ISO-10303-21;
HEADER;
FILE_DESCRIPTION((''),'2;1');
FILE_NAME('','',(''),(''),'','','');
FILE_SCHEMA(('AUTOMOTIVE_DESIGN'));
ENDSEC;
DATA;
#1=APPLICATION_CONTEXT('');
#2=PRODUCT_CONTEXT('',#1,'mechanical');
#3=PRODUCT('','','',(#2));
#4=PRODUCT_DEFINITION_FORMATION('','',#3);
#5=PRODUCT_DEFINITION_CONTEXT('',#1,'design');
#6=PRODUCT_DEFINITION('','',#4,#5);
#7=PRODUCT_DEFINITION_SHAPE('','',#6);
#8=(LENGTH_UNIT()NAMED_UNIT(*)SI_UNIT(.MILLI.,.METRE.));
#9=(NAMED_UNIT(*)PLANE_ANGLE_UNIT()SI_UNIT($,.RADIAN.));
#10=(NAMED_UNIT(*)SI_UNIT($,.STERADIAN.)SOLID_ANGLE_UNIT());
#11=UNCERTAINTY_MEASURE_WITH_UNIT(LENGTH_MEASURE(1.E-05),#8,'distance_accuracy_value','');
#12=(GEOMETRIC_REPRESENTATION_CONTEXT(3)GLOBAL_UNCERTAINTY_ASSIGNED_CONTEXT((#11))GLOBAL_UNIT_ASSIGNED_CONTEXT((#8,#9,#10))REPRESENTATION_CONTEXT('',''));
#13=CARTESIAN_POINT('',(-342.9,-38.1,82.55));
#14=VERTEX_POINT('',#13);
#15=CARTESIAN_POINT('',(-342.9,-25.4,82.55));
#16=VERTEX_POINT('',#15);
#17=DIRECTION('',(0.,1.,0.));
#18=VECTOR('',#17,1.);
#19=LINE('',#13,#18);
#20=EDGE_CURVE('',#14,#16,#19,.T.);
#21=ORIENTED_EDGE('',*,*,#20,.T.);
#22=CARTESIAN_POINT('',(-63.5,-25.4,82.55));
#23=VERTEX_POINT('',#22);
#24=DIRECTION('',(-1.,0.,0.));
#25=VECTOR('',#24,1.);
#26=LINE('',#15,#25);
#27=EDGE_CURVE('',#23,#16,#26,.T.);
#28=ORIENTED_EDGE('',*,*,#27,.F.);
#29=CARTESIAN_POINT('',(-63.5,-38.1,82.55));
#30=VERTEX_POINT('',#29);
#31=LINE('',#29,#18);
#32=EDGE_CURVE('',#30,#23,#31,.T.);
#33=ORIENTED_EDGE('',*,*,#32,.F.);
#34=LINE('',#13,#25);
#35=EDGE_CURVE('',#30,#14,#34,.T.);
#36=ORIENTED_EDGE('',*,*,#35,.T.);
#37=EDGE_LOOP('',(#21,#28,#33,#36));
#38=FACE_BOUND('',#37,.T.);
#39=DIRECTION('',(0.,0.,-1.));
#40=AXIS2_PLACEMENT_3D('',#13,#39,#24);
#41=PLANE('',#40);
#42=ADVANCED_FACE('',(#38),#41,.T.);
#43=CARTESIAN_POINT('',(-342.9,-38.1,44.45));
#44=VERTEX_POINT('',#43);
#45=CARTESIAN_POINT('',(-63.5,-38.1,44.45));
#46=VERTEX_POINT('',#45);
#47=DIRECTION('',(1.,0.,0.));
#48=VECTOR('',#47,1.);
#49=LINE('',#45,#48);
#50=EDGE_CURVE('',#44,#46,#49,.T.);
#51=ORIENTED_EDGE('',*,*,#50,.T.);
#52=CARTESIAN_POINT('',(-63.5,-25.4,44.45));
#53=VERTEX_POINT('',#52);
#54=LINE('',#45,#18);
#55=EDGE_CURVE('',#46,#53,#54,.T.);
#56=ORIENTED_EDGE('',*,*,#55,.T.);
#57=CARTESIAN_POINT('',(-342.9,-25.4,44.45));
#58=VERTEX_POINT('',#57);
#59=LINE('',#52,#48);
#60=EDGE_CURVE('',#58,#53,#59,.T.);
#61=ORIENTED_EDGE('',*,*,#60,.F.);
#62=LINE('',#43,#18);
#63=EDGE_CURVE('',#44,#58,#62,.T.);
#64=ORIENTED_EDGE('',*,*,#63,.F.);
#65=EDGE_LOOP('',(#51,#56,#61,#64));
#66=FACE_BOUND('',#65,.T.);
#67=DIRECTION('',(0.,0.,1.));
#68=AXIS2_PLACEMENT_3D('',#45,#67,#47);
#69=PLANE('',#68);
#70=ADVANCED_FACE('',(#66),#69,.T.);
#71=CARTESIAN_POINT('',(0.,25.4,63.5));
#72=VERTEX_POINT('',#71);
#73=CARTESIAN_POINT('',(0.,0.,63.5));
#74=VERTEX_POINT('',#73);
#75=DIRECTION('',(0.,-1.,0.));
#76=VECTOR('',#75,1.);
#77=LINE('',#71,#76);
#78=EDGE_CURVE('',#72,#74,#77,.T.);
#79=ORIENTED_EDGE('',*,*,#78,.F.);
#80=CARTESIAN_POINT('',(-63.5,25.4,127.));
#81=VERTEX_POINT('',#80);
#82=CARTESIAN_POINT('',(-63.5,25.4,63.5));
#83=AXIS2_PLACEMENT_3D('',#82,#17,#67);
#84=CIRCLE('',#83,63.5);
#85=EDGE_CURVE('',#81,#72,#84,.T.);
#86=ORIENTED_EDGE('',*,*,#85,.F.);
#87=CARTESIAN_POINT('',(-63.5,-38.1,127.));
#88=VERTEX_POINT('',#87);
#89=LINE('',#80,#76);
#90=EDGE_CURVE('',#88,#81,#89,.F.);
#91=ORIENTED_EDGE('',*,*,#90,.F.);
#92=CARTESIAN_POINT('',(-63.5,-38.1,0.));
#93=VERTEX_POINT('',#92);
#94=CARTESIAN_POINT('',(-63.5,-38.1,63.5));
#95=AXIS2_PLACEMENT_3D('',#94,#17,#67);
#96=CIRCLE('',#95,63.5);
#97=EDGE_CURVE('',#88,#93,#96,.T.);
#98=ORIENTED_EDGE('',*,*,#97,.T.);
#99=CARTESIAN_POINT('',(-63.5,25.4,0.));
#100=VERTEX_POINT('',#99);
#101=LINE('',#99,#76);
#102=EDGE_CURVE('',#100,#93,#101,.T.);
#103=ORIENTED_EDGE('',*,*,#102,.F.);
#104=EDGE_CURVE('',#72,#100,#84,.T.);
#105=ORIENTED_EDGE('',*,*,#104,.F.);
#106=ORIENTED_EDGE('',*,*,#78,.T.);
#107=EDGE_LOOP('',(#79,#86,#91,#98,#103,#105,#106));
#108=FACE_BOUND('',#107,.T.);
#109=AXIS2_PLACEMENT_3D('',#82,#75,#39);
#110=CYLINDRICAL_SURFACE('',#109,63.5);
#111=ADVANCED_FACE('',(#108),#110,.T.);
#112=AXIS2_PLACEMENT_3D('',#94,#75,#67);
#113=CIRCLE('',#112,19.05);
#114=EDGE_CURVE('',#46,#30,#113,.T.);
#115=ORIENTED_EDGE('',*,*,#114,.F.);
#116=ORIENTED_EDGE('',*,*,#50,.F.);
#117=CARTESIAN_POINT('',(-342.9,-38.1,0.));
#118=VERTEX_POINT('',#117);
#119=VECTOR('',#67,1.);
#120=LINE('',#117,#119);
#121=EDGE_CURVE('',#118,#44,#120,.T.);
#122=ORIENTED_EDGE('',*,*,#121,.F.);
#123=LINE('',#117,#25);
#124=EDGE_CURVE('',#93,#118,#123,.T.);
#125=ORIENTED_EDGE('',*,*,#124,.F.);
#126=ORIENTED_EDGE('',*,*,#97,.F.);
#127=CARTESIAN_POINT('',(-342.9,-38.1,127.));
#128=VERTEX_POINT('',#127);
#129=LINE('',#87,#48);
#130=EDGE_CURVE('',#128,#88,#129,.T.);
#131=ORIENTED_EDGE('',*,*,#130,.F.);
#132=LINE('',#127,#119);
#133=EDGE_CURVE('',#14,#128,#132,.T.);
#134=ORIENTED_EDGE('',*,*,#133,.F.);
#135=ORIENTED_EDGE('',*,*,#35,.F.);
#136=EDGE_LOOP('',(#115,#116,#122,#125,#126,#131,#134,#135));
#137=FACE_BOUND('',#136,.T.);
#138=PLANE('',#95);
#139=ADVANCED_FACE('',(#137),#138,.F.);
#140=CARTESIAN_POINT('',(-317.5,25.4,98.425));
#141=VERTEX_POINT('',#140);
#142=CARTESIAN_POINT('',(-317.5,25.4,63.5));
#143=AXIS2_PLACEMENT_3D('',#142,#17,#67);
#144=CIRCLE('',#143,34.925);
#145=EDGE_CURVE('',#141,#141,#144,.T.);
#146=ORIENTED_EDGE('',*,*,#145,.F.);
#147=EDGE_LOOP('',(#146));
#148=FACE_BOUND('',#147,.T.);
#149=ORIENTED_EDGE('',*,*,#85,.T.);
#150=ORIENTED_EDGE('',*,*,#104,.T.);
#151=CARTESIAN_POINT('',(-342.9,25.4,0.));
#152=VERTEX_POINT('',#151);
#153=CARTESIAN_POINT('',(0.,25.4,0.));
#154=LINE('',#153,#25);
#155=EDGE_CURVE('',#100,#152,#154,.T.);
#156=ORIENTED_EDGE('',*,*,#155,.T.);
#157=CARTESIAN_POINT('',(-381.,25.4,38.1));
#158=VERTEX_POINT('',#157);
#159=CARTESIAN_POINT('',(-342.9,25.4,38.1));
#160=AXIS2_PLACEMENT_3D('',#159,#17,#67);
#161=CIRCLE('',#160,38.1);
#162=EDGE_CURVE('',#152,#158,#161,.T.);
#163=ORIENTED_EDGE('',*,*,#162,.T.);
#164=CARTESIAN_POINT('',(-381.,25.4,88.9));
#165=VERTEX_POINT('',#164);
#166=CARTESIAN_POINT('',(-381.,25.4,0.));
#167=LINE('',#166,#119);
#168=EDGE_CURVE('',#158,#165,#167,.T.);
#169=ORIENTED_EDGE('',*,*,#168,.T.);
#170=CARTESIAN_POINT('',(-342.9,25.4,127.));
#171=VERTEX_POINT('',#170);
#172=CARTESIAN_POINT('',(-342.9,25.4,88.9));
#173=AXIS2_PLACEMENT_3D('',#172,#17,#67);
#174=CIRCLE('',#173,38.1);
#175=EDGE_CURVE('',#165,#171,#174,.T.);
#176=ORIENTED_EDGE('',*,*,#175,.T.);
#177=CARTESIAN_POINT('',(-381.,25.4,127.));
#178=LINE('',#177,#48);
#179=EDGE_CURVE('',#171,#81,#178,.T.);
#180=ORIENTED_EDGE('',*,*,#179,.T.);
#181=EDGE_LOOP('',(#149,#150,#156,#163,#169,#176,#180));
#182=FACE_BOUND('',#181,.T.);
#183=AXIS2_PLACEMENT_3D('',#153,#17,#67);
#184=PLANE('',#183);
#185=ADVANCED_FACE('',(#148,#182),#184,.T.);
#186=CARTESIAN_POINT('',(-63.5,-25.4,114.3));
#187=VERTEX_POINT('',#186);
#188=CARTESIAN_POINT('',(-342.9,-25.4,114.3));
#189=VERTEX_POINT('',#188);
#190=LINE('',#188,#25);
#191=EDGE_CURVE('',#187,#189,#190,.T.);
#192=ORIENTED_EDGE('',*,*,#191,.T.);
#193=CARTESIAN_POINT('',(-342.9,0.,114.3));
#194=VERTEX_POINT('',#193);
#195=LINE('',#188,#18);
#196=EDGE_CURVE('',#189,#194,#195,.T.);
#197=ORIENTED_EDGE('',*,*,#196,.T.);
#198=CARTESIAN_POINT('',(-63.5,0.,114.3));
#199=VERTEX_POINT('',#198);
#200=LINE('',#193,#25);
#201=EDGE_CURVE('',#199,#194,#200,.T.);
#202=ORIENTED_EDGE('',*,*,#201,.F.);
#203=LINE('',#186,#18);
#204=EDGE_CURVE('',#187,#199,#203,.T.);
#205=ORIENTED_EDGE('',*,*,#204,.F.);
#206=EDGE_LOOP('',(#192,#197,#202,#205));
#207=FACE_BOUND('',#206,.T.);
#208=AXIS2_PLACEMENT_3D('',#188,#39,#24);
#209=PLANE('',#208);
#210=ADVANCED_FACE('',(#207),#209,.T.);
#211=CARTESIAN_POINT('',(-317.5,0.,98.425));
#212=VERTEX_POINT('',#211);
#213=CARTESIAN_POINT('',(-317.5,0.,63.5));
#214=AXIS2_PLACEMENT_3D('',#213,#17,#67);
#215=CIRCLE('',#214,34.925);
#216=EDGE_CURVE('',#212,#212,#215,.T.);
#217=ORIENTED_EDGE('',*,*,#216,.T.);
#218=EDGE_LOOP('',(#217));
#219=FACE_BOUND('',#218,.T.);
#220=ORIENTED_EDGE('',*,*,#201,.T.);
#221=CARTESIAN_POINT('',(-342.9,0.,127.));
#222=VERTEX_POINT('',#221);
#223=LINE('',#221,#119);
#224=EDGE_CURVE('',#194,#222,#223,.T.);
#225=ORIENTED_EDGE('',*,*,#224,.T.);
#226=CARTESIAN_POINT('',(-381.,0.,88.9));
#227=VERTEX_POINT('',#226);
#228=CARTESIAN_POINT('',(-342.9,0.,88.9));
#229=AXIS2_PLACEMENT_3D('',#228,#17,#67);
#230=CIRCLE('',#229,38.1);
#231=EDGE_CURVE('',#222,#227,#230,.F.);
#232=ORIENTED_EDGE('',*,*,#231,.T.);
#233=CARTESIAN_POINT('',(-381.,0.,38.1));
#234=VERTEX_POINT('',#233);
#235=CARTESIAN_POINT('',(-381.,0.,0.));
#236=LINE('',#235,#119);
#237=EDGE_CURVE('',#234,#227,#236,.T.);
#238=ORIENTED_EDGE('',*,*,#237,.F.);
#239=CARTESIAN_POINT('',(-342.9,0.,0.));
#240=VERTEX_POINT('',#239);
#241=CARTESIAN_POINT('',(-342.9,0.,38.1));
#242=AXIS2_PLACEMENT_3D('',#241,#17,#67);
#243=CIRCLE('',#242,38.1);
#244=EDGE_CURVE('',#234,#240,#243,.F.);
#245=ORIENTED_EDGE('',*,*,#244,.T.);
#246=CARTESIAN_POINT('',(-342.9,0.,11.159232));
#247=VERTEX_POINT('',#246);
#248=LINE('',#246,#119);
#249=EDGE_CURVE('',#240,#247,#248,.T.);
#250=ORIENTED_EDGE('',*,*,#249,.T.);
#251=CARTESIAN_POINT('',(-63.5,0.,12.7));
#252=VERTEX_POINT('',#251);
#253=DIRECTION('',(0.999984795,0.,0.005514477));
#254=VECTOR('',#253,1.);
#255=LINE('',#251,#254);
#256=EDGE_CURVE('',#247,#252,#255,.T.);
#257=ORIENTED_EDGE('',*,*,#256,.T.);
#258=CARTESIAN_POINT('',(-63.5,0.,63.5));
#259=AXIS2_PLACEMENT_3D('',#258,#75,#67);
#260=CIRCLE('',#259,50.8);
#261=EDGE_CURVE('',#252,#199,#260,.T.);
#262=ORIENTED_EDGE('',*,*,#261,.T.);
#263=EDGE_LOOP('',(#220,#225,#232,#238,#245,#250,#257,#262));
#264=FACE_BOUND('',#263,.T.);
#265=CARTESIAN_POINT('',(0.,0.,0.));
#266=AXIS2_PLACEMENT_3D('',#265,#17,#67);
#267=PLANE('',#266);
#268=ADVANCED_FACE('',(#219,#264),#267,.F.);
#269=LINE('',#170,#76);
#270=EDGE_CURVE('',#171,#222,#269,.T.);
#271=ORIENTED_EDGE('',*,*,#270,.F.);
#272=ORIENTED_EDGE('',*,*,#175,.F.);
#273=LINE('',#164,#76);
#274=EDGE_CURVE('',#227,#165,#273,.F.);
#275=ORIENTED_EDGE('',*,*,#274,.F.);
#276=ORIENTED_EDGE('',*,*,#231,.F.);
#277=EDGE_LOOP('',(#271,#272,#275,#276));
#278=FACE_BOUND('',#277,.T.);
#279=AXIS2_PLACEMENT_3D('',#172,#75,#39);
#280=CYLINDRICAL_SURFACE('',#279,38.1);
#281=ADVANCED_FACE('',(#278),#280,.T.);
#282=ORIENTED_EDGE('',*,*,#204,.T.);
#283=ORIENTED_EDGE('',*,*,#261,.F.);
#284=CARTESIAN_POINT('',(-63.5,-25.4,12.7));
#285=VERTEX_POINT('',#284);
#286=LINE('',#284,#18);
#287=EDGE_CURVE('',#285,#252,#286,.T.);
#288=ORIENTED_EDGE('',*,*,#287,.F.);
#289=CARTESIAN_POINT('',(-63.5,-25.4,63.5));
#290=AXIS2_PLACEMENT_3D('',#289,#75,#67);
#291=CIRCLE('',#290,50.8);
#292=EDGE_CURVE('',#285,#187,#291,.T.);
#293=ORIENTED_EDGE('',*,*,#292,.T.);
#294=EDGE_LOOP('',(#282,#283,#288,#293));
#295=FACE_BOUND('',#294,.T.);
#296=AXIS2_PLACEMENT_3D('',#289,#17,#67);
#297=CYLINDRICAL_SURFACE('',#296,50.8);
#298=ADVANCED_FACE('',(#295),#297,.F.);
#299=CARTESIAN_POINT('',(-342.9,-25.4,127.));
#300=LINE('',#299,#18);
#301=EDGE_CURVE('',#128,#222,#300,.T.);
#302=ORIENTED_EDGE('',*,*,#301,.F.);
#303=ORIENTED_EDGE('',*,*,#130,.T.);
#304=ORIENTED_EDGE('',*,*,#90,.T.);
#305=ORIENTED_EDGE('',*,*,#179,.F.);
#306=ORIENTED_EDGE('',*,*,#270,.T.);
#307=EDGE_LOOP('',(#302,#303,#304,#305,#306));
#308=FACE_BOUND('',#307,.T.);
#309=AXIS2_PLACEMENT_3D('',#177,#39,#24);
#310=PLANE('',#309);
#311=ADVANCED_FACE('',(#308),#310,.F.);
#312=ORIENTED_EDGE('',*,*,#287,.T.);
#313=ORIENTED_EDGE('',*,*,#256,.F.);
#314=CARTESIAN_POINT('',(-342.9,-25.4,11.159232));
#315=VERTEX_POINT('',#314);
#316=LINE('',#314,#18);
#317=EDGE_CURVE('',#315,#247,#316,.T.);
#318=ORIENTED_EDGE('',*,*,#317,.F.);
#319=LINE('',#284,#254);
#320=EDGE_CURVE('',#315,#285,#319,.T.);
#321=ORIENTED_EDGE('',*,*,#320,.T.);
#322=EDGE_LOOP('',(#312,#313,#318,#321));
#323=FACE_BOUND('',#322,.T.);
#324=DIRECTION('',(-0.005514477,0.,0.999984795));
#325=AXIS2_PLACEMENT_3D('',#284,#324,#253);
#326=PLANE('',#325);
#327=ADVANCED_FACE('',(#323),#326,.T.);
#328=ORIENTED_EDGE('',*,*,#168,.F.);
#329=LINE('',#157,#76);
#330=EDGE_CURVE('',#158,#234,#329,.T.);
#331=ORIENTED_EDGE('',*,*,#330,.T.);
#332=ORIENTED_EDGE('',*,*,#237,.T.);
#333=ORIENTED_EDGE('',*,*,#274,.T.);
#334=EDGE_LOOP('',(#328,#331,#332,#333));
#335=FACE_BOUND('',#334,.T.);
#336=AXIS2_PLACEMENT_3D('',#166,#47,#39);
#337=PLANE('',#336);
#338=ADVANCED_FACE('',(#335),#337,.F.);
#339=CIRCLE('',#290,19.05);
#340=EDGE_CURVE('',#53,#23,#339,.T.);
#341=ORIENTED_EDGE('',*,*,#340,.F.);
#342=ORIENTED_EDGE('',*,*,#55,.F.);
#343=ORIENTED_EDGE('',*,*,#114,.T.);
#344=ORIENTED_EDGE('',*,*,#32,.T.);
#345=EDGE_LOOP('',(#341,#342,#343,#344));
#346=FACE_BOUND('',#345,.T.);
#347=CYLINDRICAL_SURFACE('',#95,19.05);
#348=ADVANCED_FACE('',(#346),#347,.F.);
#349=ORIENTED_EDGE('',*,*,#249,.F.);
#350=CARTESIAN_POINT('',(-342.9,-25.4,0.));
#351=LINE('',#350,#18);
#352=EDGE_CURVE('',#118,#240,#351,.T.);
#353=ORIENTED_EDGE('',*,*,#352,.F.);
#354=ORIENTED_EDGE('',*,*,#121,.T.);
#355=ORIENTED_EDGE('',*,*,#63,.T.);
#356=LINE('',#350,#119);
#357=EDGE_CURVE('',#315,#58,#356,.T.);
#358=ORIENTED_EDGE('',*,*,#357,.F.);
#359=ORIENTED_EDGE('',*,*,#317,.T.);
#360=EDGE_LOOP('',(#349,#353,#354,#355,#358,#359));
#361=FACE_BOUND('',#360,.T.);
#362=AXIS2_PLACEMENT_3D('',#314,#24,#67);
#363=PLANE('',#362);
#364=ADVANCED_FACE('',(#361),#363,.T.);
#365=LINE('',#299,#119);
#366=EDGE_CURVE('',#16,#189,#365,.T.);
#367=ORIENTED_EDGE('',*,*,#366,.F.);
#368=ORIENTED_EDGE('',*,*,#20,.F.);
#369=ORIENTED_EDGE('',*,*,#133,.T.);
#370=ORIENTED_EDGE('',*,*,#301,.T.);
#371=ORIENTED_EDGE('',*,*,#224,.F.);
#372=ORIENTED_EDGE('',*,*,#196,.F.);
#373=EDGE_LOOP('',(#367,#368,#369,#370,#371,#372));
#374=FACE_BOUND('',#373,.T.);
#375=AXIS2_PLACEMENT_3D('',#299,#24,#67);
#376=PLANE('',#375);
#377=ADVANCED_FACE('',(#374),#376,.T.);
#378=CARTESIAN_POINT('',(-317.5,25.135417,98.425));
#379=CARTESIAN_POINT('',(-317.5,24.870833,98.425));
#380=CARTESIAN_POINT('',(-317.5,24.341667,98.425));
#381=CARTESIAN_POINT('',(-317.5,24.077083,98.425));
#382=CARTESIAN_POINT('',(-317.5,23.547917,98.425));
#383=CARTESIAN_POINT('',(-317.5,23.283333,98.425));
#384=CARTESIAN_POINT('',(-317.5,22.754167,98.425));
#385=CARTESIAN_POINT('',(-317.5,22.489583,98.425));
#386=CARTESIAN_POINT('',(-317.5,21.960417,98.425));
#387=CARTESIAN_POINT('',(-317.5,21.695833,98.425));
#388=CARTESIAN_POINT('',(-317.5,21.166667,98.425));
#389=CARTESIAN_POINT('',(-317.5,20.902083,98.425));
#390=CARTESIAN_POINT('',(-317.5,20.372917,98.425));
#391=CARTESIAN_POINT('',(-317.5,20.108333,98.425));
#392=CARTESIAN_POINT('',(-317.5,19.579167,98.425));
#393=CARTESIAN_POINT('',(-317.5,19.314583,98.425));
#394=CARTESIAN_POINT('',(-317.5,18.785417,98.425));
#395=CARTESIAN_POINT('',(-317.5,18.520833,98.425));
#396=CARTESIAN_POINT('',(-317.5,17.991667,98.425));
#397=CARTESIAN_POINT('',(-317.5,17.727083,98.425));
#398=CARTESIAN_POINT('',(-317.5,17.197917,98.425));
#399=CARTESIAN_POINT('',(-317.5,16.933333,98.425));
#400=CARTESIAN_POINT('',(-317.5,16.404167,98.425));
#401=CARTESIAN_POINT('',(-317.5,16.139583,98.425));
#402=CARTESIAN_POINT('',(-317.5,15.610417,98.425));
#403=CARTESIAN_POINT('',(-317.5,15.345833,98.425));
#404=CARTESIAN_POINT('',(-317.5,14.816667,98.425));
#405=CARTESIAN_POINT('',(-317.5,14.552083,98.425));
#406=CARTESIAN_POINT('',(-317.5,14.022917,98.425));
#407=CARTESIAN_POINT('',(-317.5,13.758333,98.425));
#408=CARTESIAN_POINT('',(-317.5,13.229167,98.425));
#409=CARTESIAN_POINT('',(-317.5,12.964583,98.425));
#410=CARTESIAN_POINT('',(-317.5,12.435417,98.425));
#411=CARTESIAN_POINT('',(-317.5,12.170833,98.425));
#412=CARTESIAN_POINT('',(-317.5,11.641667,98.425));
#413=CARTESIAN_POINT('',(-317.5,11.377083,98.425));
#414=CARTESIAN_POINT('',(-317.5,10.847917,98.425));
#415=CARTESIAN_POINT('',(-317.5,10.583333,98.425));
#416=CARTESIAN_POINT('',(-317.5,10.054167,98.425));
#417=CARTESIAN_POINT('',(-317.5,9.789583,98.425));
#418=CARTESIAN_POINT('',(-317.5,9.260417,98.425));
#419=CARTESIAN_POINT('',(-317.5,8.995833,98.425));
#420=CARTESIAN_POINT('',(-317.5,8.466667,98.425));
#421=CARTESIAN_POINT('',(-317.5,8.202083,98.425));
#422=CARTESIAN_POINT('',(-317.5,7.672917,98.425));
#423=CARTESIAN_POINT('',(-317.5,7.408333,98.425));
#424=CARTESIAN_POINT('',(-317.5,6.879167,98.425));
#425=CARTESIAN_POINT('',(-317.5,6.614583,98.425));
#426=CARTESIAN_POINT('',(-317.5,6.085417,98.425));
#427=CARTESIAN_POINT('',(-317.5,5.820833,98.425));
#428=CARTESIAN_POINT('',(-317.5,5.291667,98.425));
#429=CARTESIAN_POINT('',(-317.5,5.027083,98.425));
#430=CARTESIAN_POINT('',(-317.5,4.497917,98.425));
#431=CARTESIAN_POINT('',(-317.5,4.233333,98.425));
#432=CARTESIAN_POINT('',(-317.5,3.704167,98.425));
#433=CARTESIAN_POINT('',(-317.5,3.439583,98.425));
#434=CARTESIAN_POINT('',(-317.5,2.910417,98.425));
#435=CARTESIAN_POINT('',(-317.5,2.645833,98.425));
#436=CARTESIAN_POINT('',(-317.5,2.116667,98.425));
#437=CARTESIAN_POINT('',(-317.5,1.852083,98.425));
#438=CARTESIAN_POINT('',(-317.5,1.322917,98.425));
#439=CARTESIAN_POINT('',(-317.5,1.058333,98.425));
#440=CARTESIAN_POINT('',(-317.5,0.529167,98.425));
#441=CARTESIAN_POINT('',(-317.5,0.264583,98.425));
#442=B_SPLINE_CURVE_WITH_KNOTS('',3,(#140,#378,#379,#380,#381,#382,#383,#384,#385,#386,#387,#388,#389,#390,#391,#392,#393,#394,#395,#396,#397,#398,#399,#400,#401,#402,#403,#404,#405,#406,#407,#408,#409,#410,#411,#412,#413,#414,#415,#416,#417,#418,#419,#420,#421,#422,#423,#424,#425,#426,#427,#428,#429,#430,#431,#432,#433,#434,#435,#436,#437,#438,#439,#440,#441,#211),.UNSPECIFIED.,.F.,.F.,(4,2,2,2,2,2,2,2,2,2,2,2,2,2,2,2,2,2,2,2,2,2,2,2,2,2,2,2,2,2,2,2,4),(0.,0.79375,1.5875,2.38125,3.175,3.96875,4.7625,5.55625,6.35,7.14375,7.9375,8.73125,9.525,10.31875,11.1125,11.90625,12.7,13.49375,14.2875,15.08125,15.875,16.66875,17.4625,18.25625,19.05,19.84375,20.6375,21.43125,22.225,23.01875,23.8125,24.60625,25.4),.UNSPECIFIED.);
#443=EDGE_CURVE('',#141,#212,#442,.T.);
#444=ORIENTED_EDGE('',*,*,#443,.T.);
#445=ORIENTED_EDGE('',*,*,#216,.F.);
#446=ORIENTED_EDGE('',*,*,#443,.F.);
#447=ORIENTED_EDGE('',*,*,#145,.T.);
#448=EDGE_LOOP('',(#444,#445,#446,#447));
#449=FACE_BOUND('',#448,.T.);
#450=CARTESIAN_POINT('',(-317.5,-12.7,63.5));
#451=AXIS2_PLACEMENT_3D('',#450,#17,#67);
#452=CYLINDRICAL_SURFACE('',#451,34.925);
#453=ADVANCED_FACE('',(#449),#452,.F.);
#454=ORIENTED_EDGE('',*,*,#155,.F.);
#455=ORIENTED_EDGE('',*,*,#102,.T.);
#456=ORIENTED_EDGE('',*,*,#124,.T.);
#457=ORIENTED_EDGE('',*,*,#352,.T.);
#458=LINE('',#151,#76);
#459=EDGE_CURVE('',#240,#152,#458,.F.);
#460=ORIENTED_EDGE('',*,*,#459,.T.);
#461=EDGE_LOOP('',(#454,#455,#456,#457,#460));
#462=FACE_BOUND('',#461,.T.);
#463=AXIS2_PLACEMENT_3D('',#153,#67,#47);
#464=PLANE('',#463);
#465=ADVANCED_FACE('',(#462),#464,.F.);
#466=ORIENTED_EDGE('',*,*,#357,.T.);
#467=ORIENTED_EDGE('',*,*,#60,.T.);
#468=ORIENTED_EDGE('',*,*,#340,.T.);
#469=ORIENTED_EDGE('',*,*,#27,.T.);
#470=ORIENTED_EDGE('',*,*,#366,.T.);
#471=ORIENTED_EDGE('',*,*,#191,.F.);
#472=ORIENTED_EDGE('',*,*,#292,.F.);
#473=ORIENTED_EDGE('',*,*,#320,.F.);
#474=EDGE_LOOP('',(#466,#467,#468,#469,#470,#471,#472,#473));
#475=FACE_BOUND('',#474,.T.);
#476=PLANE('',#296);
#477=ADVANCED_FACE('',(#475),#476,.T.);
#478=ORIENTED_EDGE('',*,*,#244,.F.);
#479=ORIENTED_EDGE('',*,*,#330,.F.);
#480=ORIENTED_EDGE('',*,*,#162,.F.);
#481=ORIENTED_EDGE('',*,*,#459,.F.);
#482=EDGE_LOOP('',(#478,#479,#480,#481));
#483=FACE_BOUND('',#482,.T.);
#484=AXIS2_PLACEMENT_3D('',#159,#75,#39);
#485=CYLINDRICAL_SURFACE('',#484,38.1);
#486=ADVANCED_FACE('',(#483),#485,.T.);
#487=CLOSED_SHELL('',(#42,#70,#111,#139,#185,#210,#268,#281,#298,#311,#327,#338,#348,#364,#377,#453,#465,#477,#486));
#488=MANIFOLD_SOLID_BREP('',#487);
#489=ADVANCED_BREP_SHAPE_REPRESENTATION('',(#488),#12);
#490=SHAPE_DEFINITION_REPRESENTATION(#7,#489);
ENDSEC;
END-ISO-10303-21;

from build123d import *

# Parameters (mm, degrees)
SKETCH1_W           = 381
SKETCH1_H           = 127
BOSS_EXTRUDE1_DEPTH = 25.4
FILLET1_R           = 63.5
FILLET2_R           = 38.1
BOSS_EXTRUDE2_DEPTH = 25.4
BOSS_EXTRUDE3_DEPTH = 12.7
SKETCH11_R          = 34.925
CUT_EXTRUDE4_DEPTH  = 38.1


with BuildPart() as part:
    # Sketch1 → Boss-Extrude1 (new body)
    with BuildSketch(Plane(origin=(0, 0, 0), x_dir=(1, 0, 0), z_dir=(0, 1, 0))):
        with Locations((-190.5, -63.5)):
            Rectangle(SKETCH1_W, SKETCH1_H)
    extrude(amount=BOSS_EXTRUDE1_DEPTH)

    # Fillet1
    fillet1_edges = [part.edges().sort_by_distance(p)[0] for p in [
        (0, 12.7, 0),
        (0, 12.7, 127),
    ]]
    fillet(fillet1_edges, radius=FILLET1_R - 0.0001)  # a hair under: the kernel refuses the full size

    # Fillet2
    fillet2_edges = [part.edges().sort_by_distance(p)[0] for p in [
        (-381, 12.7, 127),
        (-381, 12.7, 0),
    ]]
    fillet(fillet2_edges, radius=FILLET2_R)

    # Sketch2 → Boss-Extrude2 (add)
    with BuildSketch(Plane(origin=(0, 0, 0), x_dir=(1, 0, 0), z_dir=(0, 1, 0))):
        with BuildLine():
            Line((-63.5, -12.7), (-342.9, -11.159231637))
            Line((-342.9, -11.159231637), (-342.9, 0))
            Line((-342.9, 0), (-63.5, 0))
            ThreePointArc((-63.5, 0), (0, -63.5), (-63.5, -127))
            Line((-63.5, -127), (-342.9, -127))
            Line((-342.9, -127), (-342.9, -114.3))
            Line((-342.9, -114.3), (-63.5, -114.3))
            ThreePointArc((-63.5, -114.3), (-12.7, -63.5), (-63.5, -12.7))
        make_face()
    extrude(amount=-BOSS_EXTRUDE2_DEPTH)

    # Sketch3 → Boss-Extrude3 (add)
    with BuildSketch(Plane(origin=(0, -25.4, 0), x_dir=(1, 0, 0), z_dir=(0, 1, 0))):
        with BuildLine():
            Line((-342.9, -127), (-342.9, -82.55))
            Line((-342.9, -82.55), (-63.5, -82.55))
            ThreePointArc((-63.5, -82.55), (-44.45, -63.5), (-63.5, -44.45))
            Line((-63.5, -44.45), (-342.9, -44.45))
            Line((-342.9, -44.45), (-342.9, 0))
            Line((-342.9, 0), (-63.5, 0))
            ThreePointArc((-63.5, 0), (0, -63.5), (-63.5, -127))
            Line((-63.5, -127), (-342.9, -127))
        make_face()
    extrude(amount=-BOSS_EXTRUDE3_DEPTH)

    # Sketch11 → Cut-Extrude4 (cut)
    with BuildSketch(Plane(origin=(0, 25.4, 0), x_dir=(1, 0, 0), z_dir=(0, 1, 0))):
        with Locations(Location((-317.5, -63.5, 0), (0, 0, 270))):
            Circle(SKETCH11_R)
    extrude(amount=-CUT_EXTRUDE4_DEPTH, mode=Mode.SUBTRACT)


solid = part.part
